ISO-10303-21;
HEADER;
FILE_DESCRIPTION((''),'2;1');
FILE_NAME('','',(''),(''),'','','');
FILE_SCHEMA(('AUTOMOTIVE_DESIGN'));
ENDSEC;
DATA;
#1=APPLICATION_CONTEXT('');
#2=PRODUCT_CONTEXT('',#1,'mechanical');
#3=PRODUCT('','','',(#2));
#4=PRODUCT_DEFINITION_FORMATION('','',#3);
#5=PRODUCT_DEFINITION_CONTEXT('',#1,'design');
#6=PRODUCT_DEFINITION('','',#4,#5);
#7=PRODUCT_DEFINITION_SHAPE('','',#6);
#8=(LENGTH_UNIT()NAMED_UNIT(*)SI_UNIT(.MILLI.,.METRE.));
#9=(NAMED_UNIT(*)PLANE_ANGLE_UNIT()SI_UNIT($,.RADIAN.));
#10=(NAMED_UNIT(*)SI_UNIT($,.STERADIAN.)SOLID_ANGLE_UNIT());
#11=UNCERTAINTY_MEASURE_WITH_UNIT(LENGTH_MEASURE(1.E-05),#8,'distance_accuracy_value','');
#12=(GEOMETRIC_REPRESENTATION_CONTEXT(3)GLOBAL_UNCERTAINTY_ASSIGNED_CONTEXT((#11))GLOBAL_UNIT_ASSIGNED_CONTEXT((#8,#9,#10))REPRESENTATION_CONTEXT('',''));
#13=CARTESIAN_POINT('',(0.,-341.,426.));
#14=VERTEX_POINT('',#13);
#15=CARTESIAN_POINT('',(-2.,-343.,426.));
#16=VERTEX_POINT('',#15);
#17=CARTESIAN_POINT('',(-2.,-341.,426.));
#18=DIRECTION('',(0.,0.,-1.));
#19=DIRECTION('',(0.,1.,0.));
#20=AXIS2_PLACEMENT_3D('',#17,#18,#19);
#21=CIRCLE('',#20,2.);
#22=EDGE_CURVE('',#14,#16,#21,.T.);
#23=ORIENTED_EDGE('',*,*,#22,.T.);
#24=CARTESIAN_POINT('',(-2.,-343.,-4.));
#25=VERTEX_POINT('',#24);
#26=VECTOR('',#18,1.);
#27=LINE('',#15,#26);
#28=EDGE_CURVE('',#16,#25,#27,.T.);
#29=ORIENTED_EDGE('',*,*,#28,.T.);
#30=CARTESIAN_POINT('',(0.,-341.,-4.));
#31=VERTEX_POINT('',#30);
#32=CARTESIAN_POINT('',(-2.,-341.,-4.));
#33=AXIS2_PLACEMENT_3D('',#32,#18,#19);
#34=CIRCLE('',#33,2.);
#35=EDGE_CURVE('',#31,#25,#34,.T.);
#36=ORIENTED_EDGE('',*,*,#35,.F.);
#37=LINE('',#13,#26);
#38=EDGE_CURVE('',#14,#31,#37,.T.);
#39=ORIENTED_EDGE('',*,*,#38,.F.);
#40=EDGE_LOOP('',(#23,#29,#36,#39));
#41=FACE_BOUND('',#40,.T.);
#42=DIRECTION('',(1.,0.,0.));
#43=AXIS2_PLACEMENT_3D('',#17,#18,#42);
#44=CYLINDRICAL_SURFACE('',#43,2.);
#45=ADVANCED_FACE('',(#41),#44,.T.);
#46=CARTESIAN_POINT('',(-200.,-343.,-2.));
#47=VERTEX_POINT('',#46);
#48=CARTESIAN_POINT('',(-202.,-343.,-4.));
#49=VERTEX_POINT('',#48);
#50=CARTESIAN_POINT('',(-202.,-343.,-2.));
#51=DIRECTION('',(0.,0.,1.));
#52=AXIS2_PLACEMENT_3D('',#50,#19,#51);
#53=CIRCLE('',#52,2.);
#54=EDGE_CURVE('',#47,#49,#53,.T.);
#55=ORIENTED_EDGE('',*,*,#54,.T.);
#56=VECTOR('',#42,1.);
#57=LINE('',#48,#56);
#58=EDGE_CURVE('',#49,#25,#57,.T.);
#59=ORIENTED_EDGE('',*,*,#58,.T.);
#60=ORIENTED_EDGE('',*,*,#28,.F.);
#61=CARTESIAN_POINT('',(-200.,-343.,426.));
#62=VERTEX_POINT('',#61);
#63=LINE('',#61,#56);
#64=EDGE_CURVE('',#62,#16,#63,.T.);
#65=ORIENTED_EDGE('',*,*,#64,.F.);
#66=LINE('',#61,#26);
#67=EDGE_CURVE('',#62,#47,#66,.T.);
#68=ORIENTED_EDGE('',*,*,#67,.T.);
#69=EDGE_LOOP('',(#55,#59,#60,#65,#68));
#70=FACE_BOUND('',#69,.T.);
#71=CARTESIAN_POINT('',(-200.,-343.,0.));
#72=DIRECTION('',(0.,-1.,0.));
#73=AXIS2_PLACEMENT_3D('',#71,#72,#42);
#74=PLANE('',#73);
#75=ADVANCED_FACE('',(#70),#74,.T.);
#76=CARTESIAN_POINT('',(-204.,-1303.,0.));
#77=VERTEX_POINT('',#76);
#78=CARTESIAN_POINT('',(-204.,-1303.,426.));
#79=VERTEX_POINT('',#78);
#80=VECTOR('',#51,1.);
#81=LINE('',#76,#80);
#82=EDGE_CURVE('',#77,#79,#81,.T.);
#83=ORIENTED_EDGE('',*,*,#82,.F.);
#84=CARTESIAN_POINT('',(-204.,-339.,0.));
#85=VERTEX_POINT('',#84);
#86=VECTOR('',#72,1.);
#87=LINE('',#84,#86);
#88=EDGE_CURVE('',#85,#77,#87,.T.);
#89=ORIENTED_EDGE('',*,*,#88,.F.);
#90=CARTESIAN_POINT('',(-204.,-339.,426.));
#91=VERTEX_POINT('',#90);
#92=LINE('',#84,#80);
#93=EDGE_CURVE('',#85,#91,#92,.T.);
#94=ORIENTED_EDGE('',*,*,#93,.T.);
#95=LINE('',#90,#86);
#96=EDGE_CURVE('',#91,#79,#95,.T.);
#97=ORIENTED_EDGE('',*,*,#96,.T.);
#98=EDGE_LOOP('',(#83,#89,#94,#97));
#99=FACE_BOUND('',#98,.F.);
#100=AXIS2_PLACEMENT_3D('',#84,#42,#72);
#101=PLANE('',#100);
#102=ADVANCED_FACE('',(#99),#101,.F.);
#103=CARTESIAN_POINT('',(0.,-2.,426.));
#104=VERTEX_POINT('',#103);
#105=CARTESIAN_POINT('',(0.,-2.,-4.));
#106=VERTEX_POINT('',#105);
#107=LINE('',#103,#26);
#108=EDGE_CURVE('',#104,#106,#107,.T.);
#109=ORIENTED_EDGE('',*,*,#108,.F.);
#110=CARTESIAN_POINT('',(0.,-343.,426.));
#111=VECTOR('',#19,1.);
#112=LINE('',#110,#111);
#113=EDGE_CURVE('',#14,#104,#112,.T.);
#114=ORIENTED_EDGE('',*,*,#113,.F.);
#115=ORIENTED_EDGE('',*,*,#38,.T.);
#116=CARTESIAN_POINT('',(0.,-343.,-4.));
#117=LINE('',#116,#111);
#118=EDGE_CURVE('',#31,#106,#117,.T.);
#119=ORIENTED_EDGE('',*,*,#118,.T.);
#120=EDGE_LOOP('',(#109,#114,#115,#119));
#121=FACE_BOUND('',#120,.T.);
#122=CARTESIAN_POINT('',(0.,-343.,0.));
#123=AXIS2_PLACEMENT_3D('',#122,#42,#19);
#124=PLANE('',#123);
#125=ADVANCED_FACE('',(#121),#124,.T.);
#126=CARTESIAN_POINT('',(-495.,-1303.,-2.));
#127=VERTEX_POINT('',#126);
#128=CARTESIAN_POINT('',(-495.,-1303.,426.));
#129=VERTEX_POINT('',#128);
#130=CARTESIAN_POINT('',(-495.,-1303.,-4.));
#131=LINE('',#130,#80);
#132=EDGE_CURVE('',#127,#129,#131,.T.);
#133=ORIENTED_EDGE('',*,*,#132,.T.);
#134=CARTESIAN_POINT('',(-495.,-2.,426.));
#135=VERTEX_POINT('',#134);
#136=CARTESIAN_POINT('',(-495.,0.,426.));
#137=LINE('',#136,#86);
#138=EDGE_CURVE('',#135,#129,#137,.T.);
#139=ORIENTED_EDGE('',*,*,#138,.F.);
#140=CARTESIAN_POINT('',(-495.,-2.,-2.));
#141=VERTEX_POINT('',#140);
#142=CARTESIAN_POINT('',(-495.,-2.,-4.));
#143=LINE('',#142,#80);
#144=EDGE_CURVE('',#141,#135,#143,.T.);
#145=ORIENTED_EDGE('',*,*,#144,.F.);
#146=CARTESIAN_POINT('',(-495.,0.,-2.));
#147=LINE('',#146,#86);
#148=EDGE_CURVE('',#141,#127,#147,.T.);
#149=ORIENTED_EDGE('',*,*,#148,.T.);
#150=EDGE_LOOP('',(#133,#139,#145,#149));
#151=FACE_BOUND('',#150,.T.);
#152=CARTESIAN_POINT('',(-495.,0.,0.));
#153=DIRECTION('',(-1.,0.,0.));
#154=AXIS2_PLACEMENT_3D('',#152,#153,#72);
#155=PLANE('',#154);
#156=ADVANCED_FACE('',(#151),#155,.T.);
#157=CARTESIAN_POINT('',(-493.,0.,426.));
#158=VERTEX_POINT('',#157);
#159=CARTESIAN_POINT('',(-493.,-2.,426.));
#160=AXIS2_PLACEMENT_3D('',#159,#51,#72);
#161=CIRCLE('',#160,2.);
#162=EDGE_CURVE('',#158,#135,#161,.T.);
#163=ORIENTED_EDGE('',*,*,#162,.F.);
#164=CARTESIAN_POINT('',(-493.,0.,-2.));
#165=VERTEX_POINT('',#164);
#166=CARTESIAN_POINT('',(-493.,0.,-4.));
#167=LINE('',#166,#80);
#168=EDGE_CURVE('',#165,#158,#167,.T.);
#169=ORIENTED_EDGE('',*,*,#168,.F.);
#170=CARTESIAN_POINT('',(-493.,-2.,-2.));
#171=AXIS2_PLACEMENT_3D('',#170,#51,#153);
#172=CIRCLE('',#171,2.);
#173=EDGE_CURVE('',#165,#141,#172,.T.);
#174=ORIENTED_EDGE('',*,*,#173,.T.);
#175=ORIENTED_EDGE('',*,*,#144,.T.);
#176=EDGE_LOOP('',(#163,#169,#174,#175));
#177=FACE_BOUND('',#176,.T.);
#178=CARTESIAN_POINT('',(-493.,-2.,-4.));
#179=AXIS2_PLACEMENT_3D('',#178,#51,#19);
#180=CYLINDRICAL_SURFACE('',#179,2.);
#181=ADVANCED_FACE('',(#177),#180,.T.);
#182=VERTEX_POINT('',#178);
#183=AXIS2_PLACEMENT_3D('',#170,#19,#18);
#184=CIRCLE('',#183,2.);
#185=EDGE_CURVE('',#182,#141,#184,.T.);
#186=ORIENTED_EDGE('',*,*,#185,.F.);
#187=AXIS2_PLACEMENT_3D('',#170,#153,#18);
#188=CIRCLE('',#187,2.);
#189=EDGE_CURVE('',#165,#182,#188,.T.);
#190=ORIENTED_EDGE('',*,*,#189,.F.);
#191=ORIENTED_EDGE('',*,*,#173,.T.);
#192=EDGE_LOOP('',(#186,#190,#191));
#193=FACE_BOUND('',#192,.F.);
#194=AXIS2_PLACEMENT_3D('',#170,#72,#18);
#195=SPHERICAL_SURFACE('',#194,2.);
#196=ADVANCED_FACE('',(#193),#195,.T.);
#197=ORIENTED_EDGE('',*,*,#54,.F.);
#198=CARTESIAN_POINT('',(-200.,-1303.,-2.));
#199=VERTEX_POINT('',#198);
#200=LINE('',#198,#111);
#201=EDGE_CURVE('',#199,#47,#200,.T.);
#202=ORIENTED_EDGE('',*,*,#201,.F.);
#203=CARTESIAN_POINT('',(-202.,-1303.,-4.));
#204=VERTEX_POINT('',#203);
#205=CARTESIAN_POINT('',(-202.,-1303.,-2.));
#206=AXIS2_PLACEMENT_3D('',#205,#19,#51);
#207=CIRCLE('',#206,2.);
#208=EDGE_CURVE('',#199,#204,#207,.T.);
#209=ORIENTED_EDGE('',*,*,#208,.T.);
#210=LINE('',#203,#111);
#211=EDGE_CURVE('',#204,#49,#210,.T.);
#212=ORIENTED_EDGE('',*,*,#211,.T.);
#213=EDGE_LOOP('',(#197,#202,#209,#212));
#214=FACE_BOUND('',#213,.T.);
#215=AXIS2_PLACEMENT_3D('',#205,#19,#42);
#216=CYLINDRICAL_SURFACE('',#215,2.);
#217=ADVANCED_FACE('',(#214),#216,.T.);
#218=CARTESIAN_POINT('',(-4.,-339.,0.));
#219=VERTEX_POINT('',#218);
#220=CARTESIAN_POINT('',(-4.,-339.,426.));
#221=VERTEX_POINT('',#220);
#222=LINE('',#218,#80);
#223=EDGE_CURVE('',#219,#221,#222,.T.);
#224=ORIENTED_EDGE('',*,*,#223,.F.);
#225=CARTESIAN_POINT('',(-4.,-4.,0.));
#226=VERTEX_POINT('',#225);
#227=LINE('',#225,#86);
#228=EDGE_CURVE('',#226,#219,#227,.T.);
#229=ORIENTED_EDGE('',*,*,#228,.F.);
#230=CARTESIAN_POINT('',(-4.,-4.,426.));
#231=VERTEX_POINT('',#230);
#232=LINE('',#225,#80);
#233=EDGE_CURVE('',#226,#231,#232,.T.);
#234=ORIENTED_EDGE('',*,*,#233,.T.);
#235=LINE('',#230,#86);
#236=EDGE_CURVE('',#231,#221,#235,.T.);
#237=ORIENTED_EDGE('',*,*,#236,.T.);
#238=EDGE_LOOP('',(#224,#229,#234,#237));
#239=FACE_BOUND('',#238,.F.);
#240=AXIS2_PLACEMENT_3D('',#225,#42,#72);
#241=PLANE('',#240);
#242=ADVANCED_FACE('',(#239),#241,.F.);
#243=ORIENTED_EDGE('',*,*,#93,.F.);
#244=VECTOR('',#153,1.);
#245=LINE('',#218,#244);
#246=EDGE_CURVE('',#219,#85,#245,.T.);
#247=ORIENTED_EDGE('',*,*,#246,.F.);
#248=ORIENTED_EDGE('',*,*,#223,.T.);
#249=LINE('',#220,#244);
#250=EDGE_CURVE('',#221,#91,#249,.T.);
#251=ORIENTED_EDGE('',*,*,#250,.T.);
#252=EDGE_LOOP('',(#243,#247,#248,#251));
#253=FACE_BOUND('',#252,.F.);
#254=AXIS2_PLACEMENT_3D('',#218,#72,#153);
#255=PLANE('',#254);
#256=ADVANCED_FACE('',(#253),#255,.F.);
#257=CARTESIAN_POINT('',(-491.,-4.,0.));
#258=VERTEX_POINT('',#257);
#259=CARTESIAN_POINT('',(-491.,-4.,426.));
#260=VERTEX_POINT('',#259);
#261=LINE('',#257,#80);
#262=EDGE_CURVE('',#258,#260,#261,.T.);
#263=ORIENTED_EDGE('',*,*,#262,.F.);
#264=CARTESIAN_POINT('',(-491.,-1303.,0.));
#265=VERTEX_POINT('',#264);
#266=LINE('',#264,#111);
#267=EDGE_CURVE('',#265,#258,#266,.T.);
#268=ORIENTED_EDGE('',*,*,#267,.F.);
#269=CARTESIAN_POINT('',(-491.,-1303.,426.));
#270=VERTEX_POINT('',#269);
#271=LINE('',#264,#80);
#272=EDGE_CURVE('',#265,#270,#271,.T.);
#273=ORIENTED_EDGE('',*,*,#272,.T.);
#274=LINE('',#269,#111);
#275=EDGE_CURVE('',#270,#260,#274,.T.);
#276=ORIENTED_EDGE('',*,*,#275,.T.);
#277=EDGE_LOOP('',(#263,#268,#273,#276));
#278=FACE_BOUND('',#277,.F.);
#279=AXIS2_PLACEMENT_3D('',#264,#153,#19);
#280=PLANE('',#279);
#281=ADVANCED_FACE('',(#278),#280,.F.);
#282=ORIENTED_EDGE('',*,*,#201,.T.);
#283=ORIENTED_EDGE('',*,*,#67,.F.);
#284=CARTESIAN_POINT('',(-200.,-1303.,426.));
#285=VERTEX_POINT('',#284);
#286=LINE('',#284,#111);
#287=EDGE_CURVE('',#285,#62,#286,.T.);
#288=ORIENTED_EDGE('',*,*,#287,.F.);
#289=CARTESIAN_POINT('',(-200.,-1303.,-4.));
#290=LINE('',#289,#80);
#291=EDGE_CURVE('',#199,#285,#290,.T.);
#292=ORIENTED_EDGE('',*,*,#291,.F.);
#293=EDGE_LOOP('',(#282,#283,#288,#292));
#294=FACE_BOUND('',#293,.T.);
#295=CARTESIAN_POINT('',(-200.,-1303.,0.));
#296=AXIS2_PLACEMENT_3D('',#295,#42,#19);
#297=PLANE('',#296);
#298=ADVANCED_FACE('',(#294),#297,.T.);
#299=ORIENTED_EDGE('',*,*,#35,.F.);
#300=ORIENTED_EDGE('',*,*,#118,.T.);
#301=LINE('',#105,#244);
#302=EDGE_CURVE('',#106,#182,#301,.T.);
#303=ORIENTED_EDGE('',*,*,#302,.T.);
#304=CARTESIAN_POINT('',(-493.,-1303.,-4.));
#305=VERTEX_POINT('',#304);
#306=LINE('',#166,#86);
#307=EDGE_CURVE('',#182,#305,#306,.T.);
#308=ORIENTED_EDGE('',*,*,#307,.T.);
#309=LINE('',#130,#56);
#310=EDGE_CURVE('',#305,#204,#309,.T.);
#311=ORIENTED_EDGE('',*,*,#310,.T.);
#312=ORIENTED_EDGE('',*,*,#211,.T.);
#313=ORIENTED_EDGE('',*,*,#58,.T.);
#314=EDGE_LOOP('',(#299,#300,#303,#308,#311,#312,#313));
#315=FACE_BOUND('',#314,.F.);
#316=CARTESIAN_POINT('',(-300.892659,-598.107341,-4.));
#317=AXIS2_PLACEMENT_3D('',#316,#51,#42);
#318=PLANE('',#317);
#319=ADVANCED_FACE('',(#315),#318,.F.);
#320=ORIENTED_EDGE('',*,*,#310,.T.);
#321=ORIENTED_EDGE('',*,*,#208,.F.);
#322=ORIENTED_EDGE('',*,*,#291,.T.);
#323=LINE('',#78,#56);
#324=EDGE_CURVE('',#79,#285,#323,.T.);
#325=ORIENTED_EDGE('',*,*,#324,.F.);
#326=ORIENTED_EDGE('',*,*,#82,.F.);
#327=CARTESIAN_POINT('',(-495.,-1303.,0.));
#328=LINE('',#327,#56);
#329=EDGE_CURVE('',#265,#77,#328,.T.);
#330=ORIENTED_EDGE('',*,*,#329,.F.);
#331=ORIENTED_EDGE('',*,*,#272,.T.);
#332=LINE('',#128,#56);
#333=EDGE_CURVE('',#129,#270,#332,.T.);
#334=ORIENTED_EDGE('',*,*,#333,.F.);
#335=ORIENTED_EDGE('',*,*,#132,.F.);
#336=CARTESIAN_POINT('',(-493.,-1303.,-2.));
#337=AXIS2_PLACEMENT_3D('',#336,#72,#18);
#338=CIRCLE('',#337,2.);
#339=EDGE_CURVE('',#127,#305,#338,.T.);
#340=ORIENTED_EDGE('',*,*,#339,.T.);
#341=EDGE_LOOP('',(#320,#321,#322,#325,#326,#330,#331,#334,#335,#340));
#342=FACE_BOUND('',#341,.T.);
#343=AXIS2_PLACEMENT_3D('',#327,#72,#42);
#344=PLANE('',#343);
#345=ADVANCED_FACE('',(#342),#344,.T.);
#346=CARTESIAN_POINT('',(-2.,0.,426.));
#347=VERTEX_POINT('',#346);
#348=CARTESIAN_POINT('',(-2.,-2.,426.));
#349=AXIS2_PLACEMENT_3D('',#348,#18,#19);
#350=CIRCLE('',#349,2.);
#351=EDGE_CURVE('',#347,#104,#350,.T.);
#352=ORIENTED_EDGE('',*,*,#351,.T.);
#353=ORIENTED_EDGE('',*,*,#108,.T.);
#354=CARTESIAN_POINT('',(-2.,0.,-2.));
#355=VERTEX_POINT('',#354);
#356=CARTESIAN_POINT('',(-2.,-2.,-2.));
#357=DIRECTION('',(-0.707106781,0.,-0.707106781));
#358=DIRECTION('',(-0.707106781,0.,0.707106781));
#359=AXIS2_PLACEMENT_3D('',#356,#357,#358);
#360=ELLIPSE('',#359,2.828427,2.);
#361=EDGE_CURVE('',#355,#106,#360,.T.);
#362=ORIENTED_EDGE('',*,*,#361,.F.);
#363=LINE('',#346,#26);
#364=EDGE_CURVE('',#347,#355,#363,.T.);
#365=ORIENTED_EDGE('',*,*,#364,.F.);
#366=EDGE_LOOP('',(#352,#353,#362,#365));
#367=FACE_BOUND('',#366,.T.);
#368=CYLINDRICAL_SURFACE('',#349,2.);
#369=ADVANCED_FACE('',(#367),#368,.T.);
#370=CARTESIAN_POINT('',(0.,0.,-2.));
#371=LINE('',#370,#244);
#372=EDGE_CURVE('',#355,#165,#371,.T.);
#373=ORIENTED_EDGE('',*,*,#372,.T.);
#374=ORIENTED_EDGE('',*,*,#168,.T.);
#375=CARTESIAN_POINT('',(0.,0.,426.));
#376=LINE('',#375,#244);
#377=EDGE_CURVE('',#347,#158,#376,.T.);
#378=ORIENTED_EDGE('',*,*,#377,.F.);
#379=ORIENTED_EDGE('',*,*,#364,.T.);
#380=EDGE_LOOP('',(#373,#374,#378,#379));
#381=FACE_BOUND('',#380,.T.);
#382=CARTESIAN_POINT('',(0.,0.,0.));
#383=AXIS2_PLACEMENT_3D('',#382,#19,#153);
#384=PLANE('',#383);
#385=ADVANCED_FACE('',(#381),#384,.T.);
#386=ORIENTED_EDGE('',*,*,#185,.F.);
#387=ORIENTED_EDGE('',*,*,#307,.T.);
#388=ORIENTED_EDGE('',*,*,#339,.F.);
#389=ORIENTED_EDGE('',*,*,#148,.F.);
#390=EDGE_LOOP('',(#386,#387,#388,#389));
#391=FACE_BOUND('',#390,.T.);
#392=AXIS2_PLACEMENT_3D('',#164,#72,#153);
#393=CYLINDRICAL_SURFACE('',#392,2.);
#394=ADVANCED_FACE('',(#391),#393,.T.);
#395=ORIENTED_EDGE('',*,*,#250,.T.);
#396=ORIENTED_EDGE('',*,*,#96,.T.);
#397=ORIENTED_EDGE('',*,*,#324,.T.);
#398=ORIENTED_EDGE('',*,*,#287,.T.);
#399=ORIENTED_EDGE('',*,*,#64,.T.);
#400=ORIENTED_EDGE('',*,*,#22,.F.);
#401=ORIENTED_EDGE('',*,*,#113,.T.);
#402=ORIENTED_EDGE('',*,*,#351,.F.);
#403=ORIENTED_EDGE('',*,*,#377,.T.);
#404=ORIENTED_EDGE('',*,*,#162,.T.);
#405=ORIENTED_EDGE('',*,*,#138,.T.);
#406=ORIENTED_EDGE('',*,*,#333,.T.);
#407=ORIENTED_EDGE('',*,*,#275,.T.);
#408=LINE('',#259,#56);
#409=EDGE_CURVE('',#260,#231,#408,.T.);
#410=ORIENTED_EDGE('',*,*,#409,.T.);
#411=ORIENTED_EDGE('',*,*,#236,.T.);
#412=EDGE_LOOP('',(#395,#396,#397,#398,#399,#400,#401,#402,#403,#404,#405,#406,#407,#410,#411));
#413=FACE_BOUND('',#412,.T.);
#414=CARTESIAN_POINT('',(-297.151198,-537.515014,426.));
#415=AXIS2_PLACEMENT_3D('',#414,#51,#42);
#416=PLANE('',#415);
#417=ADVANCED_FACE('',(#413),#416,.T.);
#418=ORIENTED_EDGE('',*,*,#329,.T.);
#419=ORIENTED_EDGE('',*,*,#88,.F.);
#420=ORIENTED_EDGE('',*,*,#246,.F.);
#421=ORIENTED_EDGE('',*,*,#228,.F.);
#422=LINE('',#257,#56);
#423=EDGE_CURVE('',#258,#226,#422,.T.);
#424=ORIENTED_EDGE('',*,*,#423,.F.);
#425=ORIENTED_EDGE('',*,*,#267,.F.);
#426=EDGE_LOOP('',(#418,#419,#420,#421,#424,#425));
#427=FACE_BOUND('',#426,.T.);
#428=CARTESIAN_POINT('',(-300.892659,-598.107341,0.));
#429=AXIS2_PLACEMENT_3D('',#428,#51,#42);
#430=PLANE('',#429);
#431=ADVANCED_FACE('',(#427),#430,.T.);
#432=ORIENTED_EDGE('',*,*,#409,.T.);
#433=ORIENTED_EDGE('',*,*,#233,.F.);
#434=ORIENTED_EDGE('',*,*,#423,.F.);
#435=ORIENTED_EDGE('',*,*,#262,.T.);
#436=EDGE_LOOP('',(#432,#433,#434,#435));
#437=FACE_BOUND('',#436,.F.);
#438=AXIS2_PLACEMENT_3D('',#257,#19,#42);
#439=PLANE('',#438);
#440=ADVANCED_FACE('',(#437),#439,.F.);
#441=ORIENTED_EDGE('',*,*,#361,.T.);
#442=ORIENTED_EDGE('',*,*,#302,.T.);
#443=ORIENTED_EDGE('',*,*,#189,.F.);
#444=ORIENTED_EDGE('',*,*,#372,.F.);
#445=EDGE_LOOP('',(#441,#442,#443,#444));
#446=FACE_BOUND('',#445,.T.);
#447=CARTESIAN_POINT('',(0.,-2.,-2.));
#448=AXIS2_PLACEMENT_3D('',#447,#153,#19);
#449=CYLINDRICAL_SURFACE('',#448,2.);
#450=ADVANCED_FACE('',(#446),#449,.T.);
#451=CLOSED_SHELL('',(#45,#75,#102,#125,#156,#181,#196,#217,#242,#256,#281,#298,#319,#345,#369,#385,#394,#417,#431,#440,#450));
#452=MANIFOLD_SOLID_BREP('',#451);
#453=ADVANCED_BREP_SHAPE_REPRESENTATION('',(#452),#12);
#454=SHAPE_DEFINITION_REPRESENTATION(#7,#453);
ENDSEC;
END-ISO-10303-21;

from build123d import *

# Parameters (mm, degrees)
F1_DEPTH = 426
F3_DEPTH = 4
F4_R     = 2


# Not quite as in the source:
# - a feature names something its author has since deleted; it is built from what else it names


with BuildPart() as f1:
    # F0 (on Top) → F1 (new body)
    with BuildSketch(Plane.XY):
        Polygon((-200, -343), (0, -343), (0, 0), (-495, 0), (-495, -1303), (-491, -1303), (-491, -4), (-4, -4), (-4, -339), (-204, -339), (-204, -1303), (-200, -1303), align=None)
    extrude(amount=F1_DEPTH)

    # F2 (on Top) → F3 (join)
    with BuildSketch(Plane.XY):
        Polygon((0, 0), (-495, 0), (-495, -1303), (-200, -1303), (-200, -343), (0, -343), align=None)
    extrude(amount=-F3_DEPTH)

    # F4
    f4_edges = [f1.edges().sort_by_distance(p)[0] for p in [
        (-200, -823, -4),
        (-495, -651.5, -4),
        (-247.5, 0, -4),
        (-495, 0, 211),
        (0, -343, 211),
        (0, 0, 211),
    ]]
    fillet(f4_edges, radius=F4_R)


solid = f1.part
